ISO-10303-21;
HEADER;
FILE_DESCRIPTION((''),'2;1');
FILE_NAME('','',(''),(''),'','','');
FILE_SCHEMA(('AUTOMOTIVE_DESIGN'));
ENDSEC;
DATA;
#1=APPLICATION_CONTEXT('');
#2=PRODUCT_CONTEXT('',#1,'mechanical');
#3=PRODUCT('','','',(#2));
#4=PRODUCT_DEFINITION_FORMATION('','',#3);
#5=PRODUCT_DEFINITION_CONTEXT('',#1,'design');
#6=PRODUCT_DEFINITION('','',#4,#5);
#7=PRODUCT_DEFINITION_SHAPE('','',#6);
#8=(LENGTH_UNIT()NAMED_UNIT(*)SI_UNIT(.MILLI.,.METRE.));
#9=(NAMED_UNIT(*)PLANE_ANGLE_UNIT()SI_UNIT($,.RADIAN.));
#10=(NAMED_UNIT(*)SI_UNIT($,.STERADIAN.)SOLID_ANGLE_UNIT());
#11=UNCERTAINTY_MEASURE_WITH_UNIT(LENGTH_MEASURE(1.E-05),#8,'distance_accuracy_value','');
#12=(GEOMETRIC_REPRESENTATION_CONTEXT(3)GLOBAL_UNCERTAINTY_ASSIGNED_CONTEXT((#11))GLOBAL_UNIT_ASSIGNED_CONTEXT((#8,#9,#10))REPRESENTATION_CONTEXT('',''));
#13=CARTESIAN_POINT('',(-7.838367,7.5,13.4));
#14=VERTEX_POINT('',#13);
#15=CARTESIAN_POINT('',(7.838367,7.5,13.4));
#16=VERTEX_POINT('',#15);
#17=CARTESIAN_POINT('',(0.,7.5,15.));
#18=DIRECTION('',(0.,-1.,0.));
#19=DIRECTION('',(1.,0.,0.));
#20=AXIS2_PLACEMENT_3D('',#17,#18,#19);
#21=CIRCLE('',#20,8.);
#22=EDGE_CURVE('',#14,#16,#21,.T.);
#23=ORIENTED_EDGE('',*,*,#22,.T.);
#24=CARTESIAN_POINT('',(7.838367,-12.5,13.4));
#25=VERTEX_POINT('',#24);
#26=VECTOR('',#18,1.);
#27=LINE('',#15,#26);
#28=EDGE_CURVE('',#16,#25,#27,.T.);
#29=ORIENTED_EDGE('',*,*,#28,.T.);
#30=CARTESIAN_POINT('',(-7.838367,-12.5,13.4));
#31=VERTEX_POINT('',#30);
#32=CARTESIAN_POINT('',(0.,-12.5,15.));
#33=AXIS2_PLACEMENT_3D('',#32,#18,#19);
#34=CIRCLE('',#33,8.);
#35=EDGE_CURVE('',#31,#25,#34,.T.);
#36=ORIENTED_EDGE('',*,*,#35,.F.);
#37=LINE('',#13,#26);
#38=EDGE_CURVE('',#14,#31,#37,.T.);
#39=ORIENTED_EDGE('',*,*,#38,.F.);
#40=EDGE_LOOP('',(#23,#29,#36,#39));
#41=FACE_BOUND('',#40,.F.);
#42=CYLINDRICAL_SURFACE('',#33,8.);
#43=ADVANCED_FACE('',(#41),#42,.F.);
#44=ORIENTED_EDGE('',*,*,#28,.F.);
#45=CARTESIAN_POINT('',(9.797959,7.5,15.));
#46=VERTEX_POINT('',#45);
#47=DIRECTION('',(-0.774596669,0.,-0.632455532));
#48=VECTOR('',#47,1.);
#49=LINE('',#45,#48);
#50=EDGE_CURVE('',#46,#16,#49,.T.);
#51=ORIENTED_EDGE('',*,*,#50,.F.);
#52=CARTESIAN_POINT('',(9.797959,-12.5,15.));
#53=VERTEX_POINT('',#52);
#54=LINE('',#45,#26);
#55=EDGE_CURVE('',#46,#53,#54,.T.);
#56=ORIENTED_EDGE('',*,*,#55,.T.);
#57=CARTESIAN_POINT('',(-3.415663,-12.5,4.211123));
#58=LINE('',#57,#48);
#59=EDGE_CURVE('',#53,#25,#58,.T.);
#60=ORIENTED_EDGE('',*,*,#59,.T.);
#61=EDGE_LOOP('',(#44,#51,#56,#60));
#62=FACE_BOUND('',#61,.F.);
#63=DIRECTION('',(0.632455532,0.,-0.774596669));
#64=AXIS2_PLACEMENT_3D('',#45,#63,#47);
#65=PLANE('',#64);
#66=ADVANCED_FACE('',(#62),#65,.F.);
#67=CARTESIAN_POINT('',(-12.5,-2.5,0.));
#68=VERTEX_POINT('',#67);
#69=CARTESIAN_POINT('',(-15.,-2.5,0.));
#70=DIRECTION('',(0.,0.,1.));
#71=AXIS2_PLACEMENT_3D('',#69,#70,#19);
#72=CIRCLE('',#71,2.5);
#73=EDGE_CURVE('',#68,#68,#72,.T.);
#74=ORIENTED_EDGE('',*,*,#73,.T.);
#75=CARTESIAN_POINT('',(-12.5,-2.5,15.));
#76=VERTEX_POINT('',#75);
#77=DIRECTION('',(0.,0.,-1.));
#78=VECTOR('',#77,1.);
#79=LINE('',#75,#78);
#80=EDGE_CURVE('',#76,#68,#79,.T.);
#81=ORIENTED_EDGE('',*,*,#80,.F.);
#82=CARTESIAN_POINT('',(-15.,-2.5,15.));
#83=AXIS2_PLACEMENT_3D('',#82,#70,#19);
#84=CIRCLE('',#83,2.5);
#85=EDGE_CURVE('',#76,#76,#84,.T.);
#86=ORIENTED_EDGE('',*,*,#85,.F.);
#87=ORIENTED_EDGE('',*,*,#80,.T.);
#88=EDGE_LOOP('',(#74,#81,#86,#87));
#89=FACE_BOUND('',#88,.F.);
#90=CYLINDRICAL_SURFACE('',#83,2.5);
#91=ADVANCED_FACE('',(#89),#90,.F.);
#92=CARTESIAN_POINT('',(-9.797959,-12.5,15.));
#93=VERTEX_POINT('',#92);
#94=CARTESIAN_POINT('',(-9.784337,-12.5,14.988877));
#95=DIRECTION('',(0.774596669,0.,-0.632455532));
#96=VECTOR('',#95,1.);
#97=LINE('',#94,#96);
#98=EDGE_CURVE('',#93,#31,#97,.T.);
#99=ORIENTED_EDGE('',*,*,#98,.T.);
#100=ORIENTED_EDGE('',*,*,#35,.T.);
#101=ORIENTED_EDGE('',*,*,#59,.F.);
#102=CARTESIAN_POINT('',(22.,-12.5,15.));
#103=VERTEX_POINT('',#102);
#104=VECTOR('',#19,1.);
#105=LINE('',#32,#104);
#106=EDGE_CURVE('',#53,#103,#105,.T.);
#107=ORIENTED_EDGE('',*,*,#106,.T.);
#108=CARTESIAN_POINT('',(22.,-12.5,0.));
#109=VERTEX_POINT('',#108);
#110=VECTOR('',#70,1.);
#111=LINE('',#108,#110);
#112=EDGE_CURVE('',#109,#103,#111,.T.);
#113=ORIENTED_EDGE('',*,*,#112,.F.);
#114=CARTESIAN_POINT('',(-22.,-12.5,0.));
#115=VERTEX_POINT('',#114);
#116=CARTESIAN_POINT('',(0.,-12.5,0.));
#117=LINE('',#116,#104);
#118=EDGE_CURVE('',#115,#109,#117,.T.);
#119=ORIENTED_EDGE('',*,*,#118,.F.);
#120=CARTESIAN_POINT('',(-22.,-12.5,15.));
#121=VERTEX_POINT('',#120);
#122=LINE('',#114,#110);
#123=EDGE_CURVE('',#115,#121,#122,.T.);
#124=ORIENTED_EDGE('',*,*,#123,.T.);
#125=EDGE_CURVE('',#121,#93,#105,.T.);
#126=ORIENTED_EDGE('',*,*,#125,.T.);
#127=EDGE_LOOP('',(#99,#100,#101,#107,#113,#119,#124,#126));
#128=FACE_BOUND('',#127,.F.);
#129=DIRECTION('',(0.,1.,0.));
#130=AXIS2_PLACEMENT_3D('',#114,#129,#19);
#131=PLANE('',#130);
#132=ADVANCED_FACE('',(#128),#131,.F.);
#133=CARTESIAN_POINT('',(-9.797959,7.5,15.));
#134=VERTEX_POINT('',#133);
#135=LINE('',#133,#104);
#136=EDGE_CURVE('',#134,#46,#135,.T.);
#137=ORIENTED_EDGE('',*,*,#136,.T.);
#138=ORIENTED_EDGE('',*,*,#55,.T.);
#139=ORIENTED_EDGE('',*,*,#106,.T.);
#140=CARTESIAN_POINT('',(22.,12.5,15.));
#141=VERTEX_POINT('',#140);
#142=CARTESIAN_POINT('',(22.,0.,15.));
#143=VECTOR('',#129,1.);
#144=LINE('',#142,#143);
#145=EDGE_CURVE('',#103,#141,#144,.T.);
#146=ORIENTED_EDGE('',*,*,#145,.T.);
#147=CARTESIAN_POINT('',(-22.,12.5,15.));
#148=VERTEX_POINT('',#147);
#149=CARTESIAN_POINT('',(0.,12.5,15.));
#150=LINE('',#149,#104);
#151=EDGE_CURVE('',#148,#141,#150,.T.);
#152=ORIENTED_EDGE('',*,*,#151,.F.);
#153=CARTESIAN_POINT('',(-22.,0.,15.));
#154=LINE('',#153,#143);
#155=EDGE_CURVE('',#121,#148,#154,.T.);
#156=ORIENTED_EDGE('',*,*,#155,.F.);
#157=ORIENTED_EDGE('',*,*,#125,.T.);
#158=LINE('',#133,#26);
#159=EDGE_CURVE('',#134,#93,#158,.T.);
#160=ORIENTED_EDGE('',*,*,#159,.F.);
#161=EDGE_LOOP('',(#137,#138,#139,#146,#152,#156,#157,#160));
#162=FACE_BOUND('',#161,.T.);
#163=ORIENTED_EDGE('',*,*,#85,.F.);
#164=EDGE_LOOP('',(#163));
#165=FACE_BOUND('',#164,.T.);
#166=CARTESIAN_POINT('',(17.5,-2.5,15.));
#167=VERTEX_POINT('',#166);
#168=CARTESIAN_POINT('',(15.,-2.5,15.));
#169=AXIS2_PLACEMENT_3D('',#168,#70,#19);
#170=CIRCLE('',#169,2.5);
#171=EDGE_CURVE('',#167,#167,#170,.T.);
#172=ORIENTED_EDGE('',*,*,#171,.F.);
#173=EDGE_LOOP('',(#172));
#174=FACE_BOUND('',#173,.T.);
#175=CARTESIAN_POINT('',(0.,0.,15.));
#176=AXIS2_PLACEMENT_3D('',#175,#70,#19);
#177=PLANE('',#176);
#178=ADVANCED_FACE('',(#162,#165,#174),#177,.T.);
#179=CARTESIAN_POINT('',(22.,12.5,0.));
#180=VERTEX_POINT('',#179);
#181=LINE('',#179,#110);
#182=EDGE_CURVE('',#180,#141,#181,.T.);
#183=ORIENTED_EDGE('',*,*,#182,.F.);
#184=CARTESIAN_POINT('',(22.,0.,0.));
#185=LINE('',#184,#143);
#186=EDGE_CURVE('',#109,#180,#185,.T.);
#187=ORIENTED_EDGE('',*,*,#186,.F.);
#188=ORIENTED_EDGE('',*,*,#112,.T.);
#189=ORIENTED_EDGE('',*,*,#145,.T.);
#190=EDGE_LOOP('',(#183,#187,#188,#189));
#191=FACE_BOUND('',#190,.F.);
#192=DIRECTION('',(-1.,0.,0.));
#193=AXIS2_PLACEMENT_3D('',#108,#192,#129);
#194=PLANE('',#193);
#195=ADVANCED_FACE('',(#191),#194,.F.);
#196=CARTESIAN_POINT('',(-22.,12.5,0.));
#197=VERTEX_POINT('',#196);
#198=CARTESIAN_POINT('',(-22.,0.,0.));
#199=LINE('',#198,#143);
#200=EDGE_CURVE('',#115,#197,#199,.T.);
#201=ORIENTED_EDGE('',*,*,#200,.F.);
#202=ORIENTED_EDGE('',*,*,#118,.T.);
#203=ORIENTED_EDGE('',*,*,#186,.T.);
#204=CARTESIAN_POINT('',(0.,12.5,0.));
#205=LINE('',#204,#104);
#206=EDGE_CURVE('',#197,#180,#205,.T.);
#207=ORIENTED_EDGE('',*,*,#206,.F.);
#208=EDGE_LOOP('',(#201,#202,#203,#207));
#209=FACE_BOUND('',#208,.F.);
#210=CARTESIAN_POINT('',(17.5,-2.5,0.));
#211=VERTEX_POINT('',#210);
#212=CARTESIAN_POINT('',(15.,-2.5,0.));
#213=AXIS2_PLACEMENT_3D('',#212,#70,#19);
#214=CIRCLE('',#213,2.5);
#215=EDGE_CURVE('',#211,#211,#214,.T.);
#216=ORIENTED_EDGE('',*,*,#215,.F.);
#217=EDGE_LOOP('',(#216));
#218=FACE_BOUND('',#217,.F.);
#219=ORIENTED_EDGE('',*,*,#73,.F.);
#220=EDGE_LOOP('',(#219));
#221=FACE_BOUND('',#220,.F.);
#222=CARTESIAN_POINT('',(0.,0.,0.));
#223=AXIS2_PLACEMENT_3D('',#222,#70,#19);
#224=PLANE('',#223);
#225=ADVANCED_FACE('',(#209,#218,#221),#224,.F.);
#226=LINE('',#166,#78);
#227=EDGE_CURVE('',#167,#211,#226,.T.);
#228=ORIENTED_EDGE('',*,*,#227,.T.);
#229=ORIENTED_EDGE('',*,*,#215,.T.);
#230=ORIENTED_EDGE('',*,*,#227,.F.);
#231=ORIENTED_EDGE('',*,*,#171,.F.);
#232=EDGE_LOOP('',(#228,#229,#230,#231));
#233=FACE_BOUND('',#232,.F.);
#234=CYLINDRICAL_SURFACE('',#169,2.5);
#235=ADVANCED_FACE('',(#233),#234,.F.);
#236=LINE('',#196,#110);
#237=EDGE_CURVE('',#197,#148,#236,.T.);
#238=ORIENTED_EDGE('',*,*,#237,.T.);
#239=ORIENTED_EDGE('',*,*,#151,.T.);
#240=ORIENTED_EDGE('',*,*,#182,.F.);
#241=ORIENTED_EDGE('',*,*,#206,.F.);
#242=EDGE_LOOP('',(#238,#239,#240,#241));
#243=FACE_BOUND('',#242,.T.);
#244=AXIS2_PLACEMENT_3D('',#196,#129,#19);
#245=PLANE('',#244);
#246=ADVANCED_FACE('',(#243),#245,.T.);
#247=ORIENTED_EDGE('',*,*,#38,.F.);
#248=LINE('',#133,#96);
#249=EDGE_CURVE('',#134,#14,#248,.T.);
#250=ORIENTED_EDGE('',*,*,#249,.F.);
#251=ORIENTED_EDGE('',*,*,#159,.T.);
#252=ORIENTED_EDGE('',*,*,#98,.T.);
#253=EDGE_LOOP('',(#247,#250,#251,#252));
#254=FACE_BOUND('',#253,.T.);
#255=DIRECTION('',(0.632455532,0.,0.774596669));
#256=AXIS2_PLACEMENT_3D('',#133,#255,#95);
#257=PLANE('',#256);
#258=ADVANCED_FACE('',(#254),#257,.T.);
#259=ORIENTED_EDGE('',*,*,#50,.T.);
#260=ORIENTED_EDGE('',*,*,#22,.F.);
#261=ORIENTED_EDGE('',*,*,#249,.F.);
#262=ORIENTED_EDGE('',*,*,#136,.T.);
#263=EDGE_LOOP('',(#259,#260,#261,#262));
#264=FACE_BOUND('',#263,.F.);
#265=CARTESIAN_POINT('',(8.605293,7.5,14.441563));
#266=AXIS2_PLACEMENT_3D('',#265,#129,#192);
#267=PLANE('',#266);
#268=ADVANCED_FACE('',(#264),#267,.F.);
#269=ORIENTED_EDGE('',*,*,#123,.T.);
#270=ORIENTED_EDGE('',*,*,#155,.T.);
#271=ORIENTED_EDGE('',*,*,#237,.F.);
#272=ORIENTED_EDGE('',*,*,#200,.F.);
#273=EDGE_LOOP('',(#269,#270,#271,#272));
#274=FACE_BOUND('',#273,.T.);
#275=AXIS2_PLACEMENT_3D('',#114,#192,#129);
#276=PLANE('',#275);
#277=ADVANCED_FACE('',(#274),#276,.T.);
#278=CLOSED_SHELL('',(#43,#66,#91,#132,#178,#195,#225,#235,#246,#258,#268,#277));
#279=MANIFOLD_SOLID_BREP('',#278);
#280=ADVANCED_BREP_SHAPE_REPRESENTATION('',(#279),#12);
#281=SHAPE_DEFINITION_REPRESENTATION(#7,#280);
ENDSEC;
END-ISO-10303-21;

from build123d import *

# Parameters (mm, degrees)
F0_W        = 44
F0_H        = 25
F1_DEPTH    = 15
F2_R        = 8
F3_DEPTH    = 20
F4_R        = 2.5
F5_DEPTH    = 15
F6_T1_DEPTH = 24.6515369414


# Not quite as in the source:
# - a fillet or chamfer that OpenCascade refuses, or shapes differently, is made with other operations: its cross-section is extruded or revolved along the edge and cut away or added


with BuildPart() as f1:
    # F0 (on Top) → F1 (new body)
    with BuildSketch(Plane.XY):
        Rectangle(F0_W, F0_H)
    extrude(amount=F1_DEPTH)

    # F2 (on face) → F3 (cut)
    with BuildSketch(Plane.XZ.offset(12.5)):
        with Locations((0, 15)):
            Circle(F2_R)
    extrude(amount=-F3_DEPTH, mode=Mode.SUBTRACT)

    # F4 (on face) → F5 (cut)
    with BuildSketch(Plane.XY.offset(15)):
        with Locations((-15, -2.5)):
            Circle(F4_R)
        with Locations((15, -2.5)):
            Circle(F4_R)
    extrude(amount=-F5_DEPTH, mode=Mode.SUBTRACT)

    # F6: chamfer of 2 on 2 edges, made by hand

    # F6_s2 → F6_t1 (cut)
    with BuildSketch(Plane.XZ.offset(-7.5)):
        with BuildLine():
            Line((9.7979589711, 15), (7.8383671769, 13.4))
            ThreePointArc((7.8383671769, 13.4), (7.9565711479, 14.1675484588), (8, 15))
            Line((8, 15), (9.7979589711, 15))
        make_face()
        with BuildLine():
            Line((-9.7979589711, 15), (-7.8383671769, 13.4))
            ThreePointArc((-7.8383671769, 13.4), (-7.9565711479, 14.1675484588), (-8, 15))
            Line((-8, 15), (-9.7979589711, 15))
        make_face()
    extrude(amount=F6_T1_DEPTH, mode=Mode.SUBTRACT)


solid = f1.part
